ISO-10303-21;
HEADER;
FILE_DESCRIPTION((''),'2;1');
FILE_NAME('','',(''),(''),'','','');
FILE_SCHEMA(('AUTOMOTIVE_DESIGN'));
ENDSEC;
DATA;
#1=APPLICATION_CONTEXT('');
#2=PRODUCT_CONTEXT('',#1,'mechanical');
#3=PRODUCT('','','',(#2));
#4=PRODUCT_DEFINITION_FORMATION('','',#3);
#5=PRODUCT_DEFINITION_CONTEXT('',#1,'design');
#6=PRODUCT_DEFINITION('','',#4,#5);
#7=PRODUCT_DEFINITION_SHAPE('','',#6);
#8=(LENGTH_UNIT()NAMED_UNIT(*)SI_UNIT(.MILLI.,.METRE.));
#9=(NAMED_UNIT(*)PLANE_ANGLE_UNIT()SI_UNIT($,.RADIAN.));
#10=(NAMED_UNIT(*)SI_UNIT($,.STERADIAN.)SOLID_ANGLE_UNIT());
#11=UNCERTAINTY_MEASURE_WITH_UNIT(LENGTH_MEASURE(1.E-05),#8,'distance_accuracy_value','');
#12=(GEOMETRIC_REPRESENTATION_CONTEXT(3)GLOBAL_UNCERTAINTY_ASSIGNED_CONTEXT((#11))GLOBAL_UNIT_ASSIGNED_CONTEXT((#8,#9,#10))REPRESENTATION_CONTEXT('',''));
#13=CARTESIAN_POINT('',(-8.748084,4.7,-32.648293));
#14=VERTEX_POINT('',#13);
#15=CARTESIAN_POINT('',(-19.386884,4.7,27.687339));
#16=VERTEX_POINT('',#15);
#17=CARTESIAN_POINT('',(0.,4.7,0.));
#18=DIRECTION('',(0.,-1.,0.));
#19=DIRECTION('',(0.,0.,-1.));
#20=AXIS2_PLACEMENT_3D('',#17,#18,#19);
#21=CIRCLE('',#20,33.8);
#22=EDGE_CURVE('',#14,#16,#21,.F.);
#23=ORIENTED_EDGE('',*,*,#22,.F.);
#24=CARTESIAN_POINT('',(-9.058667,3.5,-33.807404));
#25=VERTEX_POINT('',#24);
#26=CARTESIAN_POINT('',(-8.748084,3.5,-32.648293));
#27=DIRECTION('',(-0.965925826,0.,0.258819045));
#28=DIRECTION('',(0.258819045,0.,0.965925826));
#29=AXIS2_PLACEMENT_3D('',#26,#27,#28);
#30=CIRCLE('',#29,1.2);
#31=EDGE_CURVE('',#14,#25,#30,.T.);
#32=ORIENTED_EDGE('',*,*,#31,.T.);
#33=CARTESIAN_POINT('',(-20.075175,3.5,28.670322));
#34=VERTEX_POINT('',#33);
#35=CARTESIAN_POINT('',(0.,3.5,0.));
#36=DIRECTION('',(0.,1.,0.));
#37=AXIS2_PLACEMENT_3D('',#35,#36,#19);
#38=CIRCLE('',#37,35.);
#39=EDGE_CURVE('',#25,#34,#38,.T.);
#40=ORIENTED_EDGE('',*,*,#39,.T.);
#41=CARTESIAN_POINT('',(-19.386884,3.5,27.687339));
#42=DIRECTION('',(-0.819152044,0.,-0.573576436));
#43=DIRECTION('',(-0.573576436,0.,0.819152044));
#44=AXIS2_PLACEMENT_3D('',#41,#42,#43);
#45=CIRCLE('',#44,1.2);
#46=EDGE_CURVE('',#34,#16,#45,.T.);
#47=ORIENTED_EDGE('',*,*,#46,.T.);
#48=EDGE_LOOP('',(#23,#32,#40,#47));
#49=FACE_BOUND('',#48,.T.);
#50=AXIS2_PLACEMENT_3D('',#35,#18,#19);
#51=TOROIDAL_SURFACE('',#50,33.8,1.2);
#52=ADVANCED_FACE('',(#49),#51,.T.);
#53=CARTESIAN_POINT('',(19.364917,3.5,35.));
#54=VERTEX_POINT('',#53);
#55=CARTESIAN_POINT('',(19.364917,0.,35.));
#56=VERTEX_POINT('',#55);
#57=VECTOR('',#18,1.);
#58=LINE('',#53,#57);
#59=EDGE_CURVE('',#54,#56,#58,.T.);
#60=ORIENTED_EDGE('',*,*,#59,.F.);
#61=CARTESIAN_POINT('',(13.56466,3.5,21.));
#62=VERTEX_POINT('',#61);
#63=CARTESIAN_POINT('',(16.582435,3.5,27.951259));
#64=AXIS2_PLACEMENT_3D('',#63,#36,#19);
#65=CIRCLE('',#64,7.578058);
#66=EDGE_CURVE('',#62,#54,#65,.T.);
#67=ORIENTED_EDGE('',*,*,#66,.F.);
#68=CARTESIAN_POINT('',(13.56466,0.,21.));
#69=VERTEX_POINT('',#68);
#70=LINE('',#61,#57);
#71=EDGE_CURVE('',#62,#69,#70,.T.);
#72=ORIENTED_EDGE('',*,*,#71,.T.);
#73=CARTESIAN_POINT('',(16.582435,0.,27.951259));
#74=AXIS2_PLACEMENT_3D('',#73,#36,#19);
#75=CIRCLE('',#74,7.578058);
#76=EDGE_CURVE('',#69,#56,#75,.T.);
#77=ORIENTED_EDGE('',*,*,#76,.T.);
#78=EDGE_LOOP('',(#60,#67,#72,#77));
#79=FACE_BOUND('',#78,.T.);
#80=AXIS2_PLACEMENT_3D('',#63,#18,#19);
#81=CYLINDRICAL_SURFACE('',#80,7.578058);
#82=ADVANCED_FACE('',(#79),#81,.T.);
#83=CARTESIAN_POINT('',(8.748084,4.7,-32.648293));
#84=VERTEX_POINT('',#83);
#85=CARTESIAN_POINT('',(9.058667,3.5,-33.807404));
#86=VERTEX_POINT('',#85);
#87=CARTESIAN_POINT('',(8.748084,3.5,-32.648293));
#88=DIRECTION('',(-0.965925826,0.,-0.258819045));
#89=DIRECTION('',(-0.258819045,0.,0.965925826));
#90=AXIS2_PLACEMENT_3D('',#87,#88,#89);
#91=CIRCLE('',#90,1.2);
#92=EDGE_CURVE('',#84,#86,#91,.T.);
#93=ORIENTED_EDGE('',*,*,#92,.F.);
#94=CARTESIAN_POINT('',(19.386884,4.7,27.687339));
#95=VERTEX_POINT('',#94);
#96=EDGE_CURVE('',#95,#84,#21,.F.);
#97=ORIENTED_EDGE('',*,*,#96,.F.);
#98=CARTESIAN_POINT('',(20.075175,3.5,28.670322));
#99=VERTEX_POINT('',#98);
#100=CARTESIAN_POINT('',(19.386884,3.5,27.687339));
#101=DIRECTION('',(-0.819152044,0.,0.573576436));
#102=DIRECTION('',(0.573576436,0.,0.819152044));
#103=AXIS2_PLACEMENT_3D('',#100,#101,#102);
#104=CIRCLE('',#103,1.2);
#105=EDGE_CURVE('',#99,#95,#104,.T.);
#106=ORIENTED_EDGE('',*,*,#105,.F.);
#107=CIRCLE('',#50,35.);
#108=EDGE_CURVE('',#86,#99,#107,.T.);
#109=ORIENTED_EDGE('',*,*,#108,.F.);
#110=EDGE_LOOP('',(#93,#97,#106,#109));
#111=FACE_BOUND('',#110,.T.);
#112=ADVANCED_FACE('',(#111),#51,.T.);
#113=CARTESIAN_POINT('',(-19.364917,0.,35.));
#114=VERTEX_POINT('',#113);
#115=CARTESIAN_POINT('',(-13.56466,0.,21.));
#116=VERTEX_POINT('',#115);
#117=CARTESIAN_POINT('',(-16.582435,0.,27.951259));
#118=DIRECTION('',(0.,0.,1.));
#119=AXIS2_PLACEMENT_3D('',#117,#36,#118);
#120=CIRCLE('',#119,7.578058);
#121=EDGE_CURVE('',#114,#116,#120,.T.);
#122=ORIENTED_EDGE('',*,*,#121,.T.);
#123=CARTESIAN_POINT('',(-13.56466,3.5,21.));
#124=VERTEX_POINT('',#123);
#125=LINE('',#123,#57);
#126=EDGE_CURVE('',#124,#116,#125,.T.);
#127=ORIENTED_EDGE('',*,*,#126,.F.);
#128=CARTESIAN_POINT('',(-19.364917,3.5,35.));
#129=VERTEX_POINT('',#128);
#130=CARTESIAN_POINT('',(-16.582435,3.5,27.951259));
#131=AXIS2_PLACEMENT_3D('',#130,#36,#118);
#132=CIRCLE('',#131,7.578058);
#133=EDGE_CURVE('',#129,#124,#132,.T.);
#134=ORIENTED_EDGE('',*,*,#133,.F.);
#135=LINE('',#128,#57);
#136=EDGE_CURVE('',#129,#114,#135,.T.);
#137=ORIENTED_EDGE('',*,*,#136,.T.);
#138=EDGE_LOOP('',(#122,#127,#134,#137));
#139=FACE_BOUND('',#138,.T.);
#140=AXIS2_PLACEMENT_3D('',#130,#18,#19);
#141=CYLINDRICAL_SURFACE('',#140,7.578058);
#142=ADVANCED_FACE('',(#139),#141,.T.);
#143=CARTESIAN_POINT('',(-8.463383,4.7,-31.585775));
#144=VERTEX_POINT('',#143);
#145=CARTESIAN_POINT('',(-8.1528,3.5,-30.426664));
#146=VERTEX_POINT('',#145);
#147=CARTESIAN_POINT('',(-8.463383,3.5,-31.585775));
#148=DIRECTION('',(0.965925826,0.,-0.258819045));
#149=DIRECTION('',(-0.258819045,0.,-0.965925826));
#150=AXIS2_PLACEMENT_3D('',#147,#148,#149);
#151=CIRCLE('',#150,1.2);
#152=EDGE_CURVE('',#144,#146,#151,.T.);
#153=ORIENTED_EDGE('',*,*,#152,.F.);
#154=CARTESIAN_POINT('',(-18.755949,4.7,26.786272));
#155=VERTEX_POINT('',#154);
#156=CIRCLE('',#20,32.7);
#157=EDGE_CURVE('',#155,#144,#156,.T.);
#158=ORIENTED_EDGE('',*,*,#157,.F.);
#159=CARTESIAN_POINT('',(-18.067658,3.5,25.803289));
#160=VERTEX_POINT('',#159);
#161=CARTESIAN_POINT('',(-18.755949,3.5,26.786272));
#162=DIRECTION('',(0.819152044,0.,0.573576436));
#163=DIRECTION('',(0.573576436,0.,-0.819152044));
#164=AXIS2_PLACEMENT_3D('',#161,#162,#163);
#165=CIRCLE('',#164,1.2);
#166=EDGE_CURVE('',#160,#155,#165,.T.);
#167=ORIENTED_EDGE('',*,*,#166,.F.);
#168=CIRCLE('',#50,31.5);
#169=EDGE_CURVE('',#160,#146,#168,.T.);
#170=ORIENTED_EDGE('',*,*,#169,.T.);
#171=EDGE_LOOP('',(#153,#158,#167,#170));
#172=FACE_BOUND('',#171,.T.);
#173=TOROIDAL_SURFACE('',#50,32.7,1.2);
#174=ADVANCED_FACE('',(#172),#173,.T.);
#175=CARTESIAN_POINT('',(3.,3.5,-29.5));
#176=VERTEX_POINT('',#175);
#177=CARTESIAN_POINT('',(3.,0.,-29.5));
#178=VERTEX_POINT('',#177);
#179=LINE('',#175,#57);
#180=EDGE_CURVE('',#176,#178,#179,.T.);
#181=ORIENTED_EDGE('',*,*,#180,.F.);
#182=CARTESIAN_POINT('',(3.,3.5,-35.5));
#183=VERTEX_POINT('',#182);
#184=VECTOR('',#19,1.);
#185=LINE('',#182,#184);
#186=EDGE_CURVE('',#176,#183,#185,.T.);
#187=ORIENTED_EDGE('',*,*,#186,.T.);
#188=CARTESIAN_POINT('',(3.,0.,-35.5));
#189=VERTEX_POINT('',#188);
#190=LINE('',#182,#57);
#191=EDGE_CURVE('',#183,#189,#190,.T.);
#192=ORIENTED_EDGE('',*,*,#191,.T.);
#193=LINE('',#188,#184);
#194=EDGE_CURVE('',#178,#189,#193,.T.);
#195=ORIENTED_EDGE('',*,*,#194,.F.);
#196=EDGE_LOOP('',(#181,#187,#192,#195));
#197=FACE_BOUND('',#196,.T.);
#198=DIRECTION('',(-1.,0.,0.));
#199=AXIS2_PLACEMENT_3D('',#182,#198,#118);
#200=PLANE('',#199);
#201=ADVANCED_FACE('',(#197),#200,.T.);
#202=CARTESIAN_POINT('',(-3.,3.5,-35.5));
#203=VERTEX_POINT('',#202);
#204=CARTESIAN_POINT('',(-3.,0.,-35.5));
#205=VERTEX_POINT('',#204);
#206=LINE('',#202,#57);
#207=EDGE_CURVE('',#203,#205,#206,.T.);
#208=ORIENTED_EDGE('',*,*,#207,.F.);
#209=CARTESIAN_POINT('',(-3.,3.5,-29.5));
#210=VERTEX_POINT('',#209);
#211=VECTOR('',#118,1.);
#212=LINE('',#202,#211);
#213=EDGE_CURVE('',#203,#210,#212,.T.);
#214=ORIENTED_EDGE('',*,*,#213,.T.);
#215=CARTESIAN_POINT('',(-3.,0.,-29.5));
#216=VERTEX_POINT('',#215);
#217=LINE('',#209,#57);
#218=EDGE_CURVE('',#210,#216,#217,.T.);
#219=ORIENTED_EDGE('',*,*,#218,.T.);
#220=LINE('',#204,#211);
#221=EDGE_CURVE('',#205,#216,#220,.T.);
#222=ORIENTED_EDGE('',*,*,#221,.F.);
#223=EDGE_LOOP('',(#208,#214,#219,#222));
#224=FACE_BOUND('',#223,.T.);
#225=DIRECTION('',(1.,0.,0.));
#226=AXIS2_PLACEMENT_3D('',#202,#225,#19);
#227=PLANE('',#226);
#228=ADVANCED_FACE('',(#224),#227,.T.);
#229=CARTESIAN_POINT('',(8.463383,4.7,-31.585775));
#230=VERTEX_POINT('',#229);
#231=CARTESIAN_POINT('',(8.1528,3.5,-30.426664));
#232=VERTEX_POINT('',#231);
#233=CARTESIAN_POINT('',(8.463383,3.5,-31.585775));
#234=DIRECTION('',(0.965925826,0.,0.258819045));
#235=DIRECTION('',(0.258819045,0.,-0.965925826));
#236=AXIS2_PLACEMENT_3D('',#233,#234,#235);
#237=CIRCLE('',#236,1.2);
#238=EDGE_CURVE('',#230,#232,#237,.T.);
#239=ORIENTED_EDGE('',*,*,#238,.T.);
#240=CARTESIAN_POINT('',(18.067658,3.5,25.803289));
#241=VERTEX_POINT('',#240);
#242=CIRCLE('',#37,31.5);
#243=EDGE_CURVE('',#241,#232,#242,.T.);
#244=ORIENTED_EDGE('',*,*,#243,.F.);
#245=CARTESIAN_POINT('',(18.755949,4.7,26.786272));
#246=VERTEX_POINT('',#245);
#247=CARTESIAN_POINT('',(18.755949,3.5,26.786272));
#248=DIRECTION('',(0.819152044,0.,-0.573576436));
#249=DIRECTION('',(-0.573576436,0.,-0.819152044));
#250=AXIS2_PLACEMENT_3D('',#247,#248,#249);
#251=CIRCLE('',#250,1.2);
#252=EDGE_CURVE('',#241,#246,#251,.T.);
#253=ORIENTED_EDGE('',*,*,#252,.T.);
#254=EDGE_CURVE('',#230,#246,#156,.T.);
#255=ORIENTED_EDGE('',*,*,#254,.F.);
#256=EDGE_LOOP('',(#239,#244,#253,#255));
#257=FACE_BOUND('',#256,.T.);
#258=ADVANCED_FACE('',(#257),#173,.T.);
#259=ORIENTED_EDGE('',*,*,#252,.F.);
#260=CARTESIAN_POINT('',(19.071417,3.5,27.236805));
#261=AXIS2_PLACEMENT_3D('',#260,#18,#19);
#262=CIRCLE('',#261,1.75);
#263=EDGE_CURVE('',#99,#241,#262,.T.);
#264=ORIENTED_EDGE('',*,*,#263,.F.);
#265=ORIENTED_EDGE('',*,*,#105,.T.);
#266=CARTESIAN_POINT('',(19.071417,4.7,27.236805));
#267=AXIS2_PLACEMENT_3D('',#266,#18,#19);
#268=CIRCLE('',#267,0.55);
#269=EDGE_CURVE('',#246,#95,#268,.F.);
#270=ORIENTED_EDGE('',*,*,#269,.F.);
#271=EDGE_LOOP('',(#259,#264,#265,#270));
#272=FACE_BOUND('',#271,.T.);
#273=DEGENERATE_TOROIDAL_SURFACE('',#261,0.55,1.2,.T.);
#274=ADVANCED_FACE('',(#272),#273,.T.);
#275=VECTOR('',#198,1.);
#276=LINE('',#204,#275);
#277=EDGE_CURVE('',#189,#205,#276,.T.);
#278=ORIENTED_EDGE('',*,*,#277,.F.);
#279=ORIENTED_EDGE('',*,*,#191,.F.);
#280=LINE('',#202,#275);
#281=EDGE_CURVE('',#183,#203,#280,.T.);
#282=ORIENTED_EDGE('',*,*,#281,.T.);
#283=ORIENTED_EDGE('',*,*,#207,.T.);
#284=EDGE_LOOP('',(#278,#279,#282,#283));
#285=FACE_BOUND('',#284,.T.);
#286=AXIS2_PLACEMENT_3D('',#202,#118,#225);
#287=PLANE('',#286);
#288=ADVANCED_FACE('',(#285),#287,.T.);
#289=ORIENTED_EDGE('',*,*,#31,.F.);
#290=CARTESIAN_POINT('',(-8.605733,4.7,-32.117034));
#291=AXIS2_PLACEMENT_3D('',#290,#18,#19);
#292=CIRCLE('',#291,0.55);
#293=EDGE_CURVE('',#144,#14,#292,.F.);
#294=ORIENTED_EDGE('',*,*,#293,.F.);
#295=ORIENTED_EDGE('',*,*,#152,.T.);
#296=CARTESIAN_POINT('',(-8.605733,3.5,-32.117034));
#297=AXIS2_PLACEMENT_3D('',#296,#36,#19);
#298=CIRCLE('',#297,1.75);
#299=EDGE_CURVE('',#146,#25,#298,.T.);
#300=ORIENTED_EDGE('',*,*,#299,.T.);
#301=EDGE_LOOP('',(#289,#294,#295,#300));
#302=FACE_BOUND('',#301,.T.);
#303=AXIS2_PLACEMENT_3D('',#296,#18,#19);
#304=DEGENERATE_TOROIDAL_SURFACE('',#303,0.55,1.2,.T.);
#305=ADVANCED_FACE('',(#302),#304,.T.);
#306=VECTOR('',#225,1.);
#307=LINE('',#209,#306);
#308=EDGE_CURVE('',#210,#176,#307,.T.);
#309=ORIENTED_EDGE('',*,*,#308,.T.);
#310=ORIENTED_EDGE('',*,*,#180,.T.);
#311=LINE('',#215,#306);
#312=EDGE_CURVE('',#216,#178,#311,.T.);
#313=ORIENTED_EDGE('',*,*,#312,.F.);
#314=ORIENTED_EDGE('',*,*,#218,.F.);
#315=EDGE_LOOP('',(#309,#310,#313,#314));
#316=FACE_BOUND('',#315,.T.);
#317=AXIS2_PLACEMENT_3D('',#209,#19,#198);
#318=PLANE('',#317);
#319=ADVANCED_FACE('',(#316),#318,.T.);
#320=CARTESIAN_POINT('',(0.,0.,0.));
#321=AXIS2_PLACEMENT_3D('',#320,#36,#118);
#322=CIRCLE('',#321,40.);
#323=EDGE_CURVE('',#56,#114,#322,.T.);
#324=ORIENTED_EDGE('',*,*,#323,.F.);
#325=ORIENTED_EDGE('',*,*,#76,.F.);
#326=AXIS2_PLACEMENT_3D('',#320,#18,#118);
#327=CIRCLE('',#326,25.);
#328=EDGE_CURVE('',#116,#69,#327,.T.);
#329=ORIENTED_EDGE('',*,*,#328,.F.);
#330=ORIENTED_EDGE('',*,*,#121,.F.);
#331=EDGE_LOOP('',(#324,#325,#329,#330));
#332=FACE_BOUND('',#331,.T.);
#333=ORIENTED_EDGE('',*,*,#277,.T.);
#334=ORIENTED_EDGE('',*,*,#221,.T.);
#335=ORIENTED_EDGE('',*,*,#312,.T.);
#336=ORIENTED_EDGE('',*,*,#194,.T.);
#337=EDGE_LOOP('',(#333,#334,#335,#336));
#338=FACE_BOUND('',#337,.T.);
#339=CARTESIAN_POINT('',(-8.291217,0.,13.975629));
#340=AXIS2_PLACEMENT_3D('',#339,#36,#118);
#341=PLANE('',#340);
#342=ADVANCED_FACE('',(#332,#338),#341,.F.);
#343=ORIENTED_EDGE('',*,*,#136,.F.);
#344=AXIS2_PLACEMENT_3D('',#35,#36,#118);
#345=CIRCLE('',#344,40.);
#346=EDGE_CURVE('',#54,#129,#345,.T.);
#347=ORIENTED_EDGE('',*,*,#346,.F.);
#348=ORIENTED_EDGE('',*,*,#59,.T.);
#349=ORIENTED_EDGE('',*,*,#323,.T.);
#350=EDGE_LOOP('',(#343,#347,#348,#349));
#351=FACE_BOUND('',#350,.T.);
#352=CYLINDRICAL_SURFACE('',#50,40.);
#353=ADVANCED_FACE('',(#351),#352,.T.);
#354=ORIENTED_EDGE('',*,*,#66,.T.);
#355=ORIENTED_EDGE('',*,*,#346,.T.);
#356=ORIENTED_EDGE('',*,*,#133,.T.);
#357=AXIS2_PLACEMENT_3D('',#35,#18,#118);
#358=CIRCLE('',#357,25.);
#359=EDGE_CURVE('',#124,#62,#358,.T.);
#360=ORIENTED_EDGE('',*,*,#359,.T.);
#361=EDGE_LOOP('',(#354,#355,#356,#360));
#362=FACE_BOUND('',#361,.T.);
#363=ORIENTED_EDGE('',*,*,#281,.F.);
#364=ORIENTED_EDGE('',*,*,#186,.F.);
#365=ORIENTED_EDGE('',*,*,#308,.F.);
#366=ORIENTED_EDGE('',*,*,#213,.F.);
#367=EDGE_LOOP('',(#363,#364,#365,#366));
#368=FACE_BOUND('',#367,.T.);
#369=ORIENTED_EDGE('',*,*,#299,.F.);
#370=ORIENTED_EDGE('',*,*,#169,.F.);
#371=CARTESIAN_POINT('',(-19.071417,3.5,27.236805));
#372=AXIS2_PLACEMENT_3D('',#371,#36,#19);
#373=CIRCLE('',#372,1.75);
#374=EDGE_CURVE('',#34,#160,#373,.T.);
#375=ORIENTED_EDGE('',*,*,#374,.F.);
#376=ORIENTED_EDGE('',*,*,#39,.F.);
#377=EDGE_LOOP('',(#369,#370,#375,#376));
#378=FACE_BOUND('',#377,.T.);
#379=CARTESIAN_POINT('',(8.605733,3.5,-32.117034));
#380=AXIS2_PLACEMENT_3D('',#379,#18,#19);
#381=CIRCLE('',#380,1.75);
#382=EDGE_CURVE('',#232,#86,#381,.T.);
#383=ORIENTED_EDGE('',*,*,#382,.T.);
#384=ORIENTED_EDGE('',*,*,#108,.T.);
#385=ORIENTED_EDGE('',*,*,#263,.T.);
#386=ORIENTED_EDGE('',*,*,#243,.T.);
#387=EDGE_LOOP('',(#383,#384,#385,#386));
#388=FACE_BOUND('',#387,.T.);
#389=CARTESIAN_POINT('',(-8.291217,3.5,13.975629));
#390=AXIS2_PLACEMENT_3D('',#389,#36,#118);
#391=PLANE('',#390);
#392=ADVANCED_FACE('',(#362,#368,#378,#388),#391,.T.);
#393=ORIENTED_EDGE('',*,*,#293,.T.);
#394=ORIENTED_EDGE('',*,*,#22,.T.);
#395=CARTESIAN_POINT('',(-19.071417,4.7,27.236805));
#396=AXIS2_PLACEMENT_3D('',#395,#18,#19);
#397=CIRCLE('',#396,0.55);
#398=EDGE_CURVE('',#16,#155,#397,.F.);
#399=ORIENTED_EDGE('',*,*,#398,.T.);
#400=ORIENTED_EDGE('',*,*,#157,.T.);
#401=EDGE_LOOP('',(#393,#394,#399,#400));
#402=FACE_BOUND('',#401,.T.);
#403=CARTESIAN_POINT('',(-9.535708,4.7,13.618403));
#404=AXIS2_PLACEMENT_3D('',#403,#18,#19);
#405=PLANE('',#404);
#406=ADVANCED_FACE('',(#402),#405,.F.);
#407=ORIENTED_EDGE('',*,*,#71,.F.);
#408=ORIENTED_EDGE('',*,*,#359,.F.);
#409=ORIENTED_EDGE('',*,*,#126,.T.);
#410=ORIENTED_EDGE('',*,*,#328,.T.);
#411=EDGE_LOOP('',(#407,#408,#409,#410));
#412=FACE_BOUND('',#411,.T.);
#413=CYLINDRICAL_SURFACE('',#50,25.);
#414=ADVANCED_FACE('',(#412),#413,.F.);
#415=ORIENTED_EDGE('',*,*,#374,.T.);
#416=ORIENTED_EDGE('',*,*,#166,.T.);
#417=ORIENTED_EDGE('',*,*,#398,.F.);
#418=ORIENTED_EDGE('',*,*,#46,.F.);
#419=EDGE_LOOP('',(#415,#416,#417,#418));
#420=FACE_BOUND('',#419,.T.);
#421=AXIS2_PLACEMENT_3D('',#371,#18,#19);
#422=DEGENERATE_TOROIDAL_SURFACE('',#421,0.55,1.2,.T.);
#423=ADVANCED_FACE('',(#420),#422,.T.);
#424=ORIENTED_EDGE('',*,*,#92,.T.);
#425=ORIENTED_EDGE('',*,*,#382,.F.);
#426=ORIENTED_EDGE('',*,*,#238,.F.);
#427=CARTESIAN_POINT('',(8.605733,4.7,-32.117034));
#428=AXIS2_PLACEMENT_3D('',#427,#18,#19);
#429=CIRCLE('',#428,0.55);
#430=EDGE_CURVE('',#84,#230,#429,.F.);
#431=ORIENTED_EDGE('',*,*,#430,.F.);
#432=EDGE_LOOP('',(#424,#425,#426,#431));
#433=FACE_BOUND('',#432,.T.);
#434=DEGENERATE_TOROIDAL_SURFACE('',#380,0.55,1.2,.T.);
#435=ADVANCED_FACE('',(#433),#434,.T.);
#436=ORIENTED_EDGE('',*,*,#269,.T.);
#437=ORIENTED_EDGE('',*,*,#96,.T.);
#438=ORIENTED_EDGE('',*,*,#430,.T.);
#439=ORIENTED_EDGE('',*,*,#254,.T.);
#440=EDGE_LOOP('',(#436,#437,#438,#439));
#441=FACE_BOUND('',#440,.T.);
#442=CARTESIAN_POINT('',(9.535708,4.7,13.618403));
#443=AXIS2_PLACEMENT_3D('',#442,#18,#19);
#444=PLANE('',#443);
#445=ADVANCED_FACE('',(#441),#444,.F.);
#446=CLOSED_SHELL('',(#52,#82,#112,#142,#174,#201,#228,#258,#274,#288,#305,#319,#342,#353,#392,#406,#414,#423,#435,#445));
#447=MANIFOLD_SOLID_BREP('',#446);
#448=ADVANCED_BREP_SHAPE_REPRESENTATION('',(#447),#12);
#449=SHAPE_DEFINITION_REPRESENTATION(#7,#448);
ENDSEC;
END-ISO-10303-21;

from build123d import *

# Parameters (mm, degrees)
ESQUISSE1_W           = 6
ESQUISSE1_H           = 6
BOSS_EXTRU_2_DEPTH    = 3.5
BOSS_EXTRU_3_DEPTH    = 1.2
CONG_2_R              = 1.2
CONG_2_OF_SYM_TRIE2_R = 1.2


with BuildPart() as part:
    # Esquisse1 → Boss.-Extru.2 (new body)
    with BuildSketch(Plane(origin=(0, 0, 0), x_dir=(1, 0, 0), z_dir=(0, 1, 0))):
        with BuildLine():
            ThreePointArc((19.364916731, -35), (0, 40), (-19.364916731, -35))
            ThreePointArc((-19.364916731, -35), (-9.581446139, -30.851796587), (-13.564659966, -21))
            ThreePointArc((-13.564659966, -21), (0, 25), (13.564659966, -21))
            ThreePointArc((13.564659966, -21), (9.581446139, -30.851796587), (19.364916731, -35))
        make_face()
        with Locations((0, 32.5)):
            Rectangle(ESQUISSE1_W, ESQUISSE1_H, mode=Mode.SUBTRACT)
    extrude(amount=BOSS_EXTRU_2_DEPTH)

    # Esquisse5 → Boss.-Extru.3 (add)
    with BuildSketch(Plane(origin=(0, 3.5, 0), x_dir=(1, 0, 0), z_dir=(0, 1, 0))):
        with BuildLine():
            ThreePointArc((-20.075175272, -28.67032155), (-34.468271355, 6.077686218), (-9.058666579, 33.80740392))
            ThreePointArc((-9.058666579, 33.80740392), (-6.915363054, 32.569967053), (-8.152799921, 30.426663528))
            ThreePointArc((-8.152799921, 30.426663528), (-31.02144422, 5.469917597), (-18.067657745, -25.803289395))
            ThreePointArc((-18.067657745, -25.803289395), (-17.637900431, -28.240564236), (-20.075175272, -28.67032155))
        make_face()
    boss_extru_3 = extrude(amount=BOSS_EXTRU_3_DEPTH)

    # Congé2
    cong_2_edges = [part.edges().sort_by_distance(p)[0] for p in [
        (-34.468271355, 4.7, -6.077686218),
        (-6.915363054, 4.7, -32.569967053),
        (-31.02144422, 4.7, -5.469917597),
        (-17.637900431, 4.7, 28.240564236),
    ]]
    fillet(cong_2_edges, radius=CONG_2_R - 0.0001)  # a hair under: the kernel refuses the full size

    # Symétrie2: Boss.-Extru.3 across plane
    add(boss_extru_3.mirror(Plane(origin=(0, 0, 0), x_dir=(0, 0, 1), z_dir=(1, 0, 0))))

    # Congé2 of Symétrie2
    cong_2_of_sym_trie2_edges = [part.edges().sort_by_distance(p)[0] for p in [
        (34.468271355, 4.7, -6.077686218),
        (6.915363054, 4.7, -32.569967053),
        (31.02144422, 4.7, -5.469917597),
        (17.637900431, 4.7, 28.240564236),
    ]]
    fillet(cong_2_of_sym_trie2_edges, radius=CONG_2_OF_SYM_TRIE2_R - 0.0001)  # a hair under: the kernel refuses the full size


solid = part.part
